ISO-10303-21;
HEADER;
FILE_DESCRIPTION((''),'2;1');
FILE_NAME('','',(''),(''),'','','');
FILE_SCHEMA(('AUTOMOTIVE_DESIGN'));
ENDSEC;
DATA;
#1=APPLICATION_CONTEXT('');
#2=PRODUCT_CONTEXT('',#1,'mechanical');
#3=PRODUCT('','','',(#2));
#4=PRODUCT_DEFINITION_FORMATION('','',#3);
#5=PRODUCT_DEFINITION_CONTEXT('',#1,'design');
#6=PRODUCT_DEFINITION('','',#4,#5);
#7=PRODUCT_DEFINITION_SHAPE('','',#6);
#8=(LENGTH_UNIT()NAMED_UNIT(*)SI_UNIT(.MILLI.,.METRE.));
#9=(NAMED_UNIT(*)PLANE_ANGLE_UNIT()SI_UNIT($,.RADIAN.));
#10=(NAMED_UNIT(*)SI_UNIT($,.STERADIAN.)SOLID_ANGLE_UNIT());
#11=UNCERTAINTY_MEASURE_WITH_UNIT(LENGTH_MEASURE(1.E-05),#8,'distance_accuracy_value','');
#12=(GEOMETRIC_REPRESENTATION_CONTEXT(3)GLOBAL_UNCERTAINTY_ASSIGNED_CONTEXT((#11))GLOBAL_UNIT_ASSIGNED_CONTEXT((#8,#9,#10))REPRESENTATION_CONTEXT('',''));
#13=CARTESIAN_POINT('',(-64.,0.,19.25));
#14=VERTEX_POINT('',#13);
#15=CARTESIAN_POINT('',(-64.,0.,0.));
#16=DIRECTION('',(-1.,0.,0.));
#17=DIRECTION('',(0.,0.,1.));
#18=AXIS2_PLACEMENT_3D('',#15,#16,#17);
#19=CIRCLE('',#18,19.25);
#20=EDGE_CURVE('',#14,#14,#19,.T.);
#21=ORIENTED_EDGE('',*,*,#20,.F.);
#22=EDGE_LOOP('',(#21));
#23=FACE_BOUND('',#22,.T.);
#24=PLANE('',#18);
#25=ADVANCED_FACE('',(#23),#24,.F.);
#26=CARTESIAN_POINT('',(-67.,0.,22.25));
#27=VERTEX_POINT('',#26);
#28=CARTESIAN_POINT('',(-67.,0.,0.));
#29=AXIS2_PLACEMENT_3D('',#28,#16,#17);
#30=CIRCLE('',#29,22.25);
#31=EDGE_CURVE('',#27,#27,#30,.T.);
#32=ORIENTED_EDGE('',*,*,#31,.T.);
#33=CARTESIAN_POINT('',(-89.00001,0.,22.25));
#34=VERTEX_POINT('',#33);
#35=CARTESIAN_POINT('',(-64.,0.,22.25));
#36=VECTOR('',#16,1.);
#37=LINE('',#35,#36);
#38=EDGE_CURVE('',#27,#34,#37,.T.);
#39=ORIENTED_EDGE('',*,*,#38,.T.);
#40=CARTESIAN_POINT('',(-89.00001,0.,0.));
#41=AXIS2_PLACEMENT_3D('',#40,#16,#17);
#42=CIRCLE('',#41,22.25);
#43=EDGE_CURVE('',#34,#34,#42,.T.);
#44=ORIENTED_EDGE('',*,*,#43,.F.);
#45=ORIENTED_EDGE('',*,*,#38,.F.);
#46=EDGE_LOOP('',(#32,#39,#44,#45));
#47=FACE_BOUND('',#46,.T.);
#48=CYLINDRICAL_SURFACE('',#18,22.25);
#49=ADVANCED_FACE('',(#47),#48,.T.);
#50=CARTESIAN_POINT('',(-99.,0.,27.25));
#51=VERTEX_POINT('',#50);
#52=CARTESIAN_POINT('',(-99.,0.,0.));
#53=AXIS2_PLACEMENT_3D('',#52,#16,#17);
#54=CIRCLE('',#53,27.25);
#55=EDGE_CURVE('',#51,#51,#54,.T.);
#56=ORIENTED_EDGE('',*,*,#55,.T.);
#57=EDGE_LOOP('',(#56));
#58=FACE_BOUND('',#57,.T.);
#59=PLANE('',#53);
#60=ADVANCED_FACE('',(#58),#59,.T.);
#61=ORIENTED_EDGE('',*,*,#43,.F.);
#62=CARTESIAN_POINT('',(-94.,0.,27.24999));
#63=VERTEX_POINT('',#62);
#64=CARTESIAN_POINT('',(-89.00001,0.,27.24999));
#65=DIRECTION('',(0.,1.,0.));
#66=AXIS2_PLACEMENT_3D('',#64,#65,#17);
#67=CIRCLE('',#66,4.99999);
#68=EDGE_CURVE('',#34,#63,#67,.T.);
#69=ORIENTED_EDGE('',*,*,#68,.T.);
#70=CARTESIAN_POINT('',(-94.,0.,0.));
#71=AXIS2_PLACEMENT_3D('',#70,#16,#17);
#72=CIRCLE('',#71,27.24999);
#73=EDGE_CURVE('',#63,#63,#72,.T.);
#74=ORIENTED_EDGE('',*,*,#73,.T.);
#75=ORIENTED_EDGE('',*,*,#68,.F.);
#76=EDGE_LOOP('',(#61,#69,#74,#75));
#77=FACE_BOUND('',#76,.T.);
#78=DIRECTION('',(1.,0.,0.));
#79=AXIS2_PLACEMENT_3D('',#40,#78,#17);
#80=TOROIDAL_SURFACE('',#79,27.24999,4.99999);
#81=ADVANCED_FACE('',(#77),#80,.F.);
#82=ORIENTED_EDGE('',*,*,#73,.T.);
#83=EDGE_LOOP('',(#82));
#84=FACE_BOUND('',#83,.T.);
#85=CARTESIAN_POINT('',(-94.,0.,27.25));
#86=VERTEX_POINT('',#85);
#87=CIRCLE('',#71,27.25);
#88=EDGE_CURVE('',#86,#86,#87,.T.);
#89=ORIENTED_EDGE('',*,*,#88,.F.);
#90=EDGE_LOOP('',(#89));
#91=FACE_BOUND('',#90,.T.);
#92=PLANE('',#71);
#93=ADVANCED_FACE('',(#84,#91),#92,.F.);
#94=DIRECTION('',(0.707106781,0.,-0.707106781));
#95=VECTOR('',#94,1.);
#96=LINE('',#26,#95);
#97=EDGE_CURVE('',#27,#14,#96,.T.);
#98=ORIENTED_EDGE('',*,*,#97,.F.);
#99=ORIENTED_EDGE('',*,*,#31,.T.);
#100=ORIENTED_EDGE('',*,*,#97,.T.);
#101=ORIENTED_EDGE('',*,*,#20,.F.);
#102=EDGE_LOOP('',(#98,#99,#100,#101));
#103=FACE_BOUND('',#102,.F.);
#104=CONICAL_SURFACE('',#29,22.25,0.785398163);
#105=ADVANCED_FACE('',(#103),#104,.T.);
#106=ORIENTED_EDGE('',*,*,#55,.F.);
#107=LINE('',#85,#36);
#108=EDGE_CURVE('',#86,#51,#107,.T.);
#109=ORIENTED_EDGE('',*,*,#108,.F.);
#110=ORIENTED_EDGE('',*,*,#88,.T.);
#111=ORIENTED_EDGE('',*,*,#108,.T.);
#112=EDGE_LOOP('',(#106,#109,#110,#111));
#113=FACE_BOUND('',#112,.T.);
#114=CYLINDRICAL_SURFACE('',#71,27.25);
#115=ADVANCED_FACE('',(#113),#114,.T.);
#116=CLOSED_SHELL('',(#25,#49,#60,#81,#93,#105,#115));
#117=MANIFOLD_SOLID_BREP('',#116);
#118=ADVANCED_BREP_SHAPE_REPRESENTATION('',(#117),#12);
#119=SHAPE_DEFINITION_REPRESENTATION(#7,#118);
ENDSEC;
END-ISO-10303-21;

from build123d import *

# Parameters (mm, degrees)
F2_SIZE = 3
F3_R    = 4.99999


# Not quite as in the source:
# - a fillet or chamfer is up to 0.001 mm smaller than in the source, because OpenCascade refuses the exact size


with BuildPart() as f1:
    # F0 (on Front) → F1 (revolve)
    with BuildSketch(Plane.XZ):
        Polygon((-64, 22.25), (-94, 22.25), (-94, 27.25), (-99, 27.25), (-99, 0), (-64, 0), align=None)
    revolve(axis=Axis((-47, 0, 0), (-1, 0, 0)))

    # F2
    f2_edges = [f1.edges().sort_by_distance(p)[0] for p in [
        (-64, 0, -22.25),
    ]]
    chamfer(f2_edges, length=F2_SIZE)

    # F3 (radius 5 in the source; OpenCascade refuses exactly that, so slightly less here)
    f3_edges = [f1.edges().sort_by_distance(p)[0] for p in [
        (-94, 0, -22.25),
    ]]
    fillet(f3_edges, radius=F3_R)


solid = f1.part
